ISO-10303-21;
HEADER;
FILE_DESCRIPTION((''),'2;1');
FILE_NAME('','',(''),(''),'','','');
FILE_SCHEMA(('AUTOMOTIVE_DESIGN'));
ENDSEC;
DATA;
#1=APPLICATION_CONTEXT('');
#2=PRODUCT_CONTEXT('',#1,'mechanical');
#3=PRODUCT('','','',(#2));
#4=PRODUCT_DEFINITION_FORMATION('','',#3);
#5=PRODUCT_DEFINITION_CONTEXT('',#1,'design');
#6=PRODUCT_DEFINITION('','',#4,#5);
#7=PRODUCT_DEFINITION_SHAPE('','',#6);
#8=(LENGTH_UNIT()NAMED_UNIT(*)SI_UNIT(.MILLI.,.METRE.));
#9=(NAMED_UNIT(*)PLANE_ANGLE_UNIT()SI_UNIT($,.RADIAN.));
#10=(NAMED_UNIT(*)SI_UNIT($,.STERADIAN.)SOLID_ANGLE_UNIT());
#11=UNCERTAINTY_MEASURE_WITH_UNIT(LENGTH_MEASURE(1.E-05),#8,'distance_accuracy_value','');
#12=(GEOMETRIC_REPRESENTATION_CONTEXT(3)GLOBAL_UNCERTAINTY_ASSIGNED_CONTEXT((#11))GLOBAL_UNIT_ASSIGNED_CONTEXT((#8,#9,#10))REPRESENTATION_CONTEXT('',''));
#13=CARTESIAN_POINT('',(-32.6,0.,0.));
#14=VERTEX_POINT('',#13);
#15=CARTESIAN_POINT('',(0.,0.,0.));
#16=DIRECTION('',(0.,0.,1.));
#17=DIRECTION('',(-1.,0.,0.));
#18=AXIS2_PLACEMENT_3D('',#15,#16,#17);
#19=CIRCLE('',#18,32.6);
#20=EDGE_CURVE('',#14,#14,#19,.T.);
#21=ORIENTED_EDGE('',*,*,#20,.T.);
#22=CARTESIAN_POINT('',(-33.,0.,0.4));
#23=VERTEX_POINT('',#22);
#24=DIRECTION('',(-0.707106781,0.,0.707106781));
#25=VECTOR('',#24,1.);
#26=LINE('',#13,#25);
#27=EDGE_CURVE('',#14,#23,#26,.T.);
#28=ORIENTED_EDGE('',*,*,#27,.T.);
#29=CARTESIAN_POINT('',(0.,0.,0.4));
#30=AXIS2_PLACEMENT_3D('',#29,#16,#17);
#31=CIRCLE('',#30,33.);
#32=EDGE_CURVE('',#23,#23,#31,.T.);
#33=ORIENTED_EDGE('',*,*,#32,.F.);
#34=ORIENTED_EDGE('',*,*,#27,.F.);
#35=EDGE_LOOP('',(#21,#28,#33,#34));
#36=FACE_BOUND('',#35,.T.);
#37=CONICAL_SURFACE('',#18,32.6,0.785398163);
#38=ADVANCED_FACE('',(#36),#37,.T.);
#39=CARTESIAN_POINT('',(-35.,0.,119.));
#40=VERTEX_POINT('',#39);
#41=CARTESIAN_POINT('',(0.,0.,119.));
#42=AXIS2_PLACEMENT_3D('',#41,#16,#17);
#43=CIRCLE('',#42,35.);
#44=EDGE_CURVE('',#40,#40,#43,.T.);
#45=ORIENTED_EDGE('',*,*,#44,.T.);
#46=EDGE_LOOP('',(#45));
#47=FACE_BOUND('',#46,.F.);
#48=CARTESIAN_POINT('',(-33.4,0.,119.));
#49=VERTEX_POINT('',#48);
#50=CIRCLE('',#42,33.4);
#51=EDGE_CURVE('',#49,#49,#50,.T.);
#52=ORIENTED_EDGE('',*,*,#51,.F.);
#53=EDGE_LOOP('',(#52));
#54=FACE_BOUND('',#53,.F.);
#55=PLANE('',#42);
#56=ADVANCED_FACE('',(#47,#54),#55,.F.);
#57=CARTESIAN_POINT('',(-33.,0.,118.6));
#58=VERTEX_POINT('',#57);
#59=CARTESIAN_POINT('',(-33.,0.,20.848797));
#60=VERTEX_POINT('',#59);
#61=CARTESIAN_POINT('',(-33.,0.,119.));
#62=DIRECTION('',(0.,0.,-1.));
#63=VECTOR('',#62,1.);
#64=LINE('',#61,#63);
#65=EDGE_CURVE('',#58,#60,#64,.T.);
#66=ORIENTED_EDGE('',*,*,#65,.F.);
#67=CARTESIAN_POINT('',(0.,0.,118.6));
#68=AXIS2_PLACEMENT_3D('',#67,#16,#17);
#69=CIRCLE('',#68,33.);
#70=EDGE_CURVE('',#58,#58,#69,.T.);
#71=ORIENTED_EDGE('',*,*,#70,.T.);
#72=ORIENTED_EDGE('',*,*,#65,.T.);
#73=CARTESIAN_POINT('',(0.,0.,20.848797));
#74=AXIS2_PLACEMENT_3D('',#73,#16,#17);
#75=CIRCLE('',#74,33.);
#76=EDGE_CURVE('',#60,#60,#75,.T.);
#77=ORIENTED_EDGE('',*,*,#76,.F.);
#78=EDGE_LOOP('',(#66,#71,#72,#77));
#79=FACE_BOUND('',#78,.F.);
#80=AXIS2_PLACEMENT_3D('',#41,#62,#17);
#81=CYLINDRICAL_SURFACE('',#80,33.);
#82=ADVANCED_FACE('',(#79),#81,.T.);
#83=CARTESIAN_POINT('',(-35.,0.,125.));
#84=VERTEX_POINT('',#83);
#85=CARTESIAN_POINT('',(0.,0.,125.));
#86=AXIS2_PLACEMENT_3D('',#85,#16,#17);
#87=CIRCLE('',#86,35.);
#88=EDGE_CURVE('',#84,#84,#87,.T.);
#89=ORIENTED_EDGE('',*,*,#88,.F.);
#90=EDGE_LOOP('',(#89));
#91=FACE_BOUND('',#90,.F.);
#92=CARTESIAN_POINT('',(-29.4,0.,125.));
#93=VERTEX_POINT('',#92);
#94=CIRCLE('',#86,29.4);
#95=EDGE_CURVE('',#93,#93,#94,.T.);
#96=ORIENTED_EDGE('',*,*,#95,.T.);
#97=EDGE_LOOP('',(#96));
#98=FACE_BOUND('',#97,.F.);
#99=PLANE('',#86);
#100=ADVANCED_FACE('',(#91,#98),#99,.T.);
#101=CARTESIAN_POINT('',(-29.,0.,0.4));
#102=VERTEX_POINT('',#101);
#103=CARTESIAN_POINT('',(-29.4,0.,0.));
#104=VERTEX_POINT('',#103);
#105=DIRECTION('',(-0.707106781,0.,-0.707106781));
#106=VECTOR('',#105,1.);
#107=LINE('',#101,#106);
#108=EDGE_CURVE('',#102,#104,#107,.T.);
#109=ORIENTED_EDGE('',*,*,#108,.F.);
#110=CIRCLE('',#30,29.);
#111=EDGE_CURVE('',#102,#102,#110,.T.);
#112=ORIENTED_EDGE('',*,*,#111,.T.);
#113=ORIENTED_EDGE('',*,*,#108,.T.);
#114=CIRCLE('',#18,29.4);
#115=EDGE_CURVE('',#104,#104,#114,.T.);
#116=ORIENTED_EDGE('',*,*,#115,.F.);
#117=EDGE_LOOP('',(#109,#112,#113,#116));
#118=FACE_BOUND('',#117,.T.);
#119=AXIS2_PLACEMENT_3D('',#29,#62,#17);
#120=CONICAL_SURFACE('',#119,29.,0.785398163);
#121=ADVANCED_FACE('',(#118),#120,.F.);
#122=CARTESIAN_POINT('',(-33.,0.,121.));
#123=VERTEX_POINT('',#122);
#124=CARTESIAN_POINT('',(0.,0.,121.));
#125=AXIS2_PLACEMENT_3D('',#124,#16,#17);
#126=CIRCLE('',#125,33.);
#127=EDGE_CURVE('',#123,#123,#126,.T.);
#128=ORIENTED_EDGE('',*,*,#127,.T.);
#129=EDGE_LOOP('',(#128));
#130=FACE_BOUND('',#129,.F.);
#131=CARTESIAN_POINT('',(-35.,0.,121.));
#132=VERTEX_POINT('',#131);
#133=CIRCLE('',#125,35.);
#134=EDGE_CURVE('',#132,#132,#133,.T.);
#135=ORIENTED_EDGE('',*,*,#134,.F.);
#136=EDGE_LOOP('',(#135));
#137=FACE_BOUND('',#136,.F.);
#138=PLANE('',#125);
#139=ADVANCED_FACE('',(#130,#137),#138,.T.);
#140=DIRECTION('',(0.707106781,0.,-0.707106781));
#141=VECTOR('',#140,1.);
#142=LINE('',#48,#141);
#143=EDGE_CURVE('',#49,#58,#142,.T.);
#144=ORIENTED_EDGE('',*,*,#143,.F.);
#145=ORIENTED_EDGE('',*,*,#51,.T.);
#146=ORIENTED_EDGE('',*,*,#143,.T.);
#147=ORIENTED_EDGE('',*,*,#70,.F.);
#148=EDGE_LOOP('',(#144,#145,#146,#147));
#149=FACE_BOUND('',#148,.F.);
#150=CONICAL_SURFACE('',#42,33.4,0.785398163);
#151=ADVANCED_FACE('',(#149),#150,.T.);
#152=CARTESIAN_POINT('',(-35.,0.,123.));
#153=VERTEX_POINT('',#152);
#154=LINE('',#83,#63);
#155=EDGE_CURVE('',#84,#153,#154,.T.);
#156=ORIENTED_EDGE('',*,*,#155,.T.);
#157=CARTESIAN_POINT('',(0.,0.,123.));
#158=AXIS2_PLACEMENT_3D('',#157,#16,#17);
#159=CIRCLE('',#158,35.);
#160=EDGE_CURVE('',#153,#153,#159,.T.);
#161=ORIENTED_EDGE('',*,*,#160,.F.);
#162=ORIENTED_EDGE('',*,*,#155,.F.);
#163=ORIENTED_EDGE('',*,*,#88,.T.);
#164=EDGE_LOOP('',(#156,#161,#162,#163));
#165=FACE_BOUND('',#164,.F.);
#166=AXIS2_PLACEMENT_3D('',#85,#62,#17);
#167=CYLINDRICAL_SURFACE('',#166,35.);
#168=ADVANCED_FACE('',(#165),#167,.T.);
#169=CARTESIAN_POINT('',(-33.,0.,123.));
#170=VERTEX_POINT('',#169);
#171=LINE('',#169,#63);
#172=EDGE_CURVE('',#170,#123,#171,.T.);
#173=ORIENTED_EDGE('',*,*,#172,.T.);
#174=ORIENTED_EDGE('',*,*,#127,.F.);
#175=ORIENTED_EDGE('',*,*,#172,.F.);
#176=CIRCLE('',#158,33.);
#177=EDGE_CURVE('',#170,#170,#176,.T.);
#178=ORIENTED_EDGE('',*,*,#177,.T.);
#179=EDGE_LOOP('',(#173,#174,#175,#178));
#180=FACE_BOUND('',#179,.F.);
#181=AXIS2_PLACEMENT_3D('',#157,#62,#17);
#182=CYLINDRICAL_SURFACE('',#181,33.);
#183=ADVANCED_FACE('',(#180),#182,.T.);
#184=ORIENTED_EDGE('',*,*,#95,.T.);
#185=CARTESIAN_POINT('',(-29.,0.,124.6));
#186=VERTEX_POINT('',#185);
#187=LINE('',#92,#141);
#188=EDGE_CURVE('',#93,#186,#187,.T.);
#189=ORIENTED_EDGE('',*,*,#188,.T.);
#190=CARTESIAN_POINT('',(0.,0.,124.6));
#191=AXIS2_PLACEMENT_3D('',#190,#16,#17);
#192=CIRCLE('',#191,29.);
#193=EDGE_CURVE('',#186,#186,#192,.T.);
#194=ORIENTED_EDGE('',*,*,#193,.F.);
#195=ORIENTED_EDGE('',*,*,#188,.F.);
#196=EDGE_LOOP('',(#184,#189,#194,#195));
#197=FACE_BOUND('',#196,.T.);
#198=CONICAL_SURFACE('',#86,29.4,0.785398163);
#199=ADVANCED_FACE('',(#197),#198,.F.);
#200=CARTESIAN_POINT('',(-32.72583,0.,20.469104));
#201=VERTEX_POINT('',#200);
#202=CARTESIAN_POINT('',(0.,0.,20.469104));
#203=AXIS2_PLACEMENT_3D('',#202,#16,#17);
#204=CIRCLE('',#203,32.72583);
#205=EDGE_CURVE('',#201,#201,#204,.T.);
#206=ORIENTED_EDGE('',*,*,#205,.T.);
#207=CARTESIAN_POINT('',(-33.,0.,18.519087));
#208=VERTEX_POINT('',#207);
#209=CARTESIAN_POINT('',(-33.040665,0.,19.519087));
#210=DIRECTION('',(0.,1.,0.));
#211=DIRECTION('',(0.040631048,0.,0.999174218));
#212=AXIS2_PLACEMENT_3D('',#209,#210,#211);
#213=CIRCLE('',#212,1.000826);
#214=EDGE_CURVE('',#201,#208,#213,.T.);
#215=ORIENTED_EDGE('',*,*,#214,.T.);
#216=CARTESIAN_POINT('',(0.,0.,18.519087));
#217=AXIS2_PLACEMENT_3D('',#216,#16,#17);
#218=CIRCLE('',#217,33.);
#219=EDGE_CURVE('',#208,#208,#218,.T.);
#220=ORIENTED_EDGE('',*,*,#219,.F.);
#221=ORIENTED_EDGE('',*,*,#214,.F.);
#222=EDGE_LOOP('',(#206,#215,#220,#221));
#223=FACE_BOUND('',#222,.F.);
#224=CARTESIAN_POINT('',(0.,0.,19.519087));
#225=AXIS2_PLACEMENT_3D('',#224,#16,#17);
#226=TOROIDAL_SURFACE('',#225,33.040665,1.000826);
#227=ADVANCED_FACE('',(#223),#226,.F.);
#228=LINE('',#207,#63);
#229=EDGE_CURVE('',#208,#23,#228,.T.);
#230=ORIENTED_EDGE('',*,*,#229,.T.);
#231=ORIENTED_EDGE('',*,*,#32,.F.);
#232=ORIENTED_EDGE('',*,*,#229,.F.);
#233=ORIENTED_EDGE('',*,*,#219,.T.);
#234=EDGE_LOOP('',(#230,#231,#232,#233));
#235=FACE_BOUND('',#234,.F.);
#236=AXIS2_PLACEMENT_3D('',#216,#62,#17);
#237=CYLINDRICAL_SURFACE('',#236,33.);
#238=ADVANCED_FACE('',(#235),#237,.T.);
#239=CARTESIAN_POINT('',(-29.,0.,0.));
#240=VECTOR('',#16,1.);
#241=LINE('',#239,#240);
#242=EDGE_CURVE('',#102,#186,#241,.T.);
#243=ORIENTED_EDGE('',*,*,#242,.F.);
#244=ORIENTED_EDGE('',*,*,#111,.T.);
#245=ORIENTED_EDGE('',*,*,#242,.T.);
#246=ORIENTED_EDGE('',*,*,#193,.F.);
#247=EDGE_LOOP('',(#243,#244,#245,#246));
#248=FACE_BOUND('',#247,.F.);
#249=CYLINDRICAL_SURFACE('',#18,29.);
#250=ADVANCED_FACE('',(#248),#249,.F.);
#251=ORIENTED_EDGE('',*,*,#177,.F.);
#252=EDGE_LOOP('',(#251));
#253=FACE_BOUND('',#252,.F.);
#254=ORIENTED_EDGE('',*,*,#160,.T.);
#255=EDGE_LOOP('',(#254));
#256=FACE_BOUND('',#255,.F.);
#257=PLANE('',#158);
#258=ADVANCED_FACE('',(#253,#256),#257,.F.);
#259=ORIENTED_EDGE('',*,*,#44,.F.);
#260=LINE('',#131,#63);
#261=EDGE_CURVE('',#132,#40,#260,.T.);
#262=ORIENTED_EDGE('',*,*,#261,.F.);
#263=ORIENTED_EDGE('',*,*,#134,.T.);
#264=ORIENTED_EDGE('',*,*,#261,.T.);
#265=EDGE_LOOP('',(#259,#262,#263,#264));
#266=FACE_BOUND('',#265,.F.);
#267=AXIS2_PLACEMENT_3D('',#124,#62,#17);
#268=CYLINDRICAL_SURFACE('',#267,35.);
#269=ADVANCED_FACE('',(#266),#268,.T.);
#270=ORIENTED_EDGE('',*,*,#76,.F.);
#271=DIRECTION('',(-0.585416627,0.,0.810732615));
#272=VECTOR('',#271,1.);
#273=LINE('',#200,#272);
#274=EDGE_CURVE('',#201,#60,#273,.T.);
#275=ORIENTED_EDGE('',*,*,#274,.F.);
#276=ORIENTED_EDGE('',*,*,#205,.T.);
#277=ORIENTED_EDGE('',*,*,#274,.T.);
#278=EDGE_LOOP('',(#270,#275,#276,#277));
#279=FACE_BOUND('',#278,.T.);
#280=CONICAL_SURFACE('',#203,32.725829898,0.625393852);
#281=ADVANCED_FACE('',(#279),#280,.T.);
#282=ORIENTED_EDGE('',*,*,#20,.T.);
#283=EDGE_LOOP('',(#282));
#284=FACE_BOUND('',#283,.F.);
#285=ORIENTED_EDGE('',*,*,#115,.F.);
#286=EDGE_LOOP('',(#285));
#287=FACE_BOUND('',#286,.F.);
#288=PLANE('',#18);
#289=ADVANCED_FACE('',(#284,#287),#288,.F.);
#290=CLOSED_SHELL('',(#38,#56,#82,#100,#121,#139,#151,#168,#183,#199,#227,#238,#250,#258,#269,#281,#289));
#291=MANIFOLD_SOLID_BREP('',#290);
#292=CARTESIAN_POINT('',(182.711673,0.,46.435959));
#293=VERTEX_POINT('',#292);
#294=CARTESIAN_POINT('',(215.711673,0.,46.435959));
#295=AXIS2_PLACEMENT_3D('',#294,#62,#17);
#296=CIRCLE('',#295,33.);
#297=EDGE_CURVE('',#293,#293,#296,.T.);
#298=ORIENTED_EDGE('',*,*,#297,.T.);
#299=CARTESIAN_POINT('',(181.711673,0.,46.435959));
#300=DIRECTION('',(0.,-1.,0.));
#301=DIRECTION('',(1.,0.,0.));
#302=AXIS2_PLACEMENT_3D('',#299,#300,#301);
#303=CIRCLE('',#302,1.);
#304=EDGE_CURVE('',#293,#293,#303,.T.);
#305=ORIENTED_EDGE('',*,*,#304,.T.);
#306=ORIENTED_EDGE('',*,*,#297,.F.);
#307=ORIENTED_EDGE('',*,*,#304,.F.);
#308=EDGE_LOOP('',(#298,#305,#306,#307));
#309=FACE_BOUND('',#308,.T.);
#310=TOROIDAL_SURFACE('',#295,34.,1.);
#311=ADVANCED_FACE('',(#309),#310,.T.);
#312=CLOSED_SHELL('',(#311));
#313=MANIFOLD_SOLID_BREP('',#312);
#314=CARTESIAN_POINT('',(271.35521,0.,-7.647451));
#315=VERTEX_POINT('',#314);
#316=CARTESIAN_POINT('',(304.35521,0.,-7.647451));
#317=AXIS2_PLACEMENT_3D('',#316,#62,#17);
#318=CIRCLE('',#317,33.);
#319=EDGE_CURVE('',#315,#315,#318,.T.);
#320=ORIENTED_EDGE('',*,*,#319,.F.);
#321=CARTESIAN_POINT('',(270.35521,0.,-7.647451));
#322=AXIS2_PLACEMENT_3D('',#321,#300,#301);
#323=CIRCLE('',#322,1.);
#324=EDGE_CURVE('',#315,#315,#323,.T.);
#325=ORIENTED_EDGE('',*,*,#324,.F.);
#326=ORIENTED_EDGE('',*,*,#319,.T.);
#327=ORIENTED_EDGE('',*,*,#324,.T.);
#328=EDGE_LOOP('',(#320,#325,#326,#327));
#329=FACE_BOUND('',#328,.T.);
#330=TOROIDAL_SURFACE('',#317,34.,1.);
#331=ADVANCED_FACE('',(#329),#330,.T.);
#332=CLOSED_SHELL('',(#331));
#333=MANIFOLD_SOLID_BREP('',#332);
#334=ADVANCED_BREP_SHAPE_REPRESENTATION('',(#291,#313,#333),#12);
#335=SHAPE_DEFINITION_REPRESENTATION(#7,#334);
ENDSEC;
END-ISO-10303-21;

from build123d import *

# Parameters (mm, degrees)
F3_R = 1
F6_R = 1


# Not quite as in the source:
# - a fillet or chamfer that OpenCascade refuses, or shapes differently, is made with other operations: its cross-section is extruded or revolved along the edge and cut away or added


with BuildPart() as f1:
    # F0 (on Front) → F1 (revolve)
    with BuildSketch(Plane.XZ):
        with BuildLine():
            Line((-29, 125), (-35, 125))
            Line((-35, 125), (-35, 123))
            Line((-35, 123), (-33, 123))
            Line((-33, 123), (-33, 121))
            Line((-33, 121), (-35, 121))
            Line((-35, 121), (-35, 119))
            Line((-35, 119), (-33, 119))
            Line((-33, 119), (-33, 20.5190867633))
            ThreePointArc((-33, 20.5190867633), (-32.0398381638, 19.5190867633), (-33, 18.5190867633))
            Line((-33, 18.5190867633), (-33, 0))
            Line((-33, 0), (-29, 0))
            Line((-29, 0), (-29, 125))
        make_face()
    revolve(axis=Axis((0, 0, 70.6444829702), (0, 0, 1)))

    # F2: chamfer of 0.4 on 5 edges, made by hand

    # F2_s1 → F2_t2 (revolve)
    with BuildSketch(Plane.XZ):
        Polygon((-33.4, 119), (-33, 118.6), (-33, 119), align=None)
    revolve(axis=Axis((0, 0, 119), (0, 0, 1)))

    # F2_s3 → F2_t4 (revolve, cut)
    with BuildSketch(Plane.XZ):
        Polygon((-29.4, 125), (-29, 124.6), (-29, 125), align=None)
    revolve(axis=Axis((0, 0, 125), (0, 0, 1)), mode=Mode.SUBTRACT)

    # F2_s5 → F2_t6 (revolve, cut)
    with BuildSketch(Plane.XZ):
        Polygon((-29, 0.4), (-29.4, 0), (-29, 0), align=None)
    revolve(axis=Axis((0, 0, 0), (0, 0, 1)), mode=Mode.SUBTRACT)

    # F2_s7 → F2_t8 (revolve, cut)
    with BuildSketch(Plane.XZ):
        with BuildLine():
            Line((-32.7258298981, 20.4691039761), (-33, 20.8487970584))
            Line((-33, 20.8487970584), (-33, 20.5190867633))
            ThreePointArc((-33, 20.5190867633), (-32.8554047109, 20.5026173296), (-32.7258298981, 20.4691039761))
        make_face()
    revolve(axis=Axis((0, 0, 20.5190867633), (0, 0, 1)), mode=Mode.SUBTRACT)

    # F2_s9 → F2_t10 (revolve, cut)
    with BuildSketch(Plane.XZ):
        Polygon((-32.6, 0), (-33, 0.4), (-33, 0), align=None)
    revolve(axis=Axis((0, 0, 0), (0, 0, 1)), mode=Mode.SUBTRACT)


with BuildPart() as f4:
    # F3 (on Front) → F4 (revolve)
    with BuildSketch(Plane.XZ):
        with Locations((270.3552097399, -7.6474512478)):
            Circle(F3_R)
    revolve(axis=Axis((304.3552097399, 0, 1.5939064324), (0, 0, -1)))


with BuildPart() as f4b:
    # F3 (on Front) → F4, piece 2 (revolve)
    with BuildSketch(Plane.XZ):
        with Locations((185.3699033564, 49.2150506932)):
            Circle(F3_R)
    revolve(axis=Axis((304.3552097399, 0, 1.5939064324), (0, 0, -1)))


with BuildPart() as f7:
    # F6 (on Front) → F7 (revolve)
    with BuildSketch(Plane.XZ):
        with Locations((181.7116728007, 46.4359594094)):
            Circle(F6_R)
    revolve(axis=Axis((215.7116728007, 0, 69.0873954445), (0, 0, -1)))


solid = Compound([f1.part, f4.part, f7.part])
